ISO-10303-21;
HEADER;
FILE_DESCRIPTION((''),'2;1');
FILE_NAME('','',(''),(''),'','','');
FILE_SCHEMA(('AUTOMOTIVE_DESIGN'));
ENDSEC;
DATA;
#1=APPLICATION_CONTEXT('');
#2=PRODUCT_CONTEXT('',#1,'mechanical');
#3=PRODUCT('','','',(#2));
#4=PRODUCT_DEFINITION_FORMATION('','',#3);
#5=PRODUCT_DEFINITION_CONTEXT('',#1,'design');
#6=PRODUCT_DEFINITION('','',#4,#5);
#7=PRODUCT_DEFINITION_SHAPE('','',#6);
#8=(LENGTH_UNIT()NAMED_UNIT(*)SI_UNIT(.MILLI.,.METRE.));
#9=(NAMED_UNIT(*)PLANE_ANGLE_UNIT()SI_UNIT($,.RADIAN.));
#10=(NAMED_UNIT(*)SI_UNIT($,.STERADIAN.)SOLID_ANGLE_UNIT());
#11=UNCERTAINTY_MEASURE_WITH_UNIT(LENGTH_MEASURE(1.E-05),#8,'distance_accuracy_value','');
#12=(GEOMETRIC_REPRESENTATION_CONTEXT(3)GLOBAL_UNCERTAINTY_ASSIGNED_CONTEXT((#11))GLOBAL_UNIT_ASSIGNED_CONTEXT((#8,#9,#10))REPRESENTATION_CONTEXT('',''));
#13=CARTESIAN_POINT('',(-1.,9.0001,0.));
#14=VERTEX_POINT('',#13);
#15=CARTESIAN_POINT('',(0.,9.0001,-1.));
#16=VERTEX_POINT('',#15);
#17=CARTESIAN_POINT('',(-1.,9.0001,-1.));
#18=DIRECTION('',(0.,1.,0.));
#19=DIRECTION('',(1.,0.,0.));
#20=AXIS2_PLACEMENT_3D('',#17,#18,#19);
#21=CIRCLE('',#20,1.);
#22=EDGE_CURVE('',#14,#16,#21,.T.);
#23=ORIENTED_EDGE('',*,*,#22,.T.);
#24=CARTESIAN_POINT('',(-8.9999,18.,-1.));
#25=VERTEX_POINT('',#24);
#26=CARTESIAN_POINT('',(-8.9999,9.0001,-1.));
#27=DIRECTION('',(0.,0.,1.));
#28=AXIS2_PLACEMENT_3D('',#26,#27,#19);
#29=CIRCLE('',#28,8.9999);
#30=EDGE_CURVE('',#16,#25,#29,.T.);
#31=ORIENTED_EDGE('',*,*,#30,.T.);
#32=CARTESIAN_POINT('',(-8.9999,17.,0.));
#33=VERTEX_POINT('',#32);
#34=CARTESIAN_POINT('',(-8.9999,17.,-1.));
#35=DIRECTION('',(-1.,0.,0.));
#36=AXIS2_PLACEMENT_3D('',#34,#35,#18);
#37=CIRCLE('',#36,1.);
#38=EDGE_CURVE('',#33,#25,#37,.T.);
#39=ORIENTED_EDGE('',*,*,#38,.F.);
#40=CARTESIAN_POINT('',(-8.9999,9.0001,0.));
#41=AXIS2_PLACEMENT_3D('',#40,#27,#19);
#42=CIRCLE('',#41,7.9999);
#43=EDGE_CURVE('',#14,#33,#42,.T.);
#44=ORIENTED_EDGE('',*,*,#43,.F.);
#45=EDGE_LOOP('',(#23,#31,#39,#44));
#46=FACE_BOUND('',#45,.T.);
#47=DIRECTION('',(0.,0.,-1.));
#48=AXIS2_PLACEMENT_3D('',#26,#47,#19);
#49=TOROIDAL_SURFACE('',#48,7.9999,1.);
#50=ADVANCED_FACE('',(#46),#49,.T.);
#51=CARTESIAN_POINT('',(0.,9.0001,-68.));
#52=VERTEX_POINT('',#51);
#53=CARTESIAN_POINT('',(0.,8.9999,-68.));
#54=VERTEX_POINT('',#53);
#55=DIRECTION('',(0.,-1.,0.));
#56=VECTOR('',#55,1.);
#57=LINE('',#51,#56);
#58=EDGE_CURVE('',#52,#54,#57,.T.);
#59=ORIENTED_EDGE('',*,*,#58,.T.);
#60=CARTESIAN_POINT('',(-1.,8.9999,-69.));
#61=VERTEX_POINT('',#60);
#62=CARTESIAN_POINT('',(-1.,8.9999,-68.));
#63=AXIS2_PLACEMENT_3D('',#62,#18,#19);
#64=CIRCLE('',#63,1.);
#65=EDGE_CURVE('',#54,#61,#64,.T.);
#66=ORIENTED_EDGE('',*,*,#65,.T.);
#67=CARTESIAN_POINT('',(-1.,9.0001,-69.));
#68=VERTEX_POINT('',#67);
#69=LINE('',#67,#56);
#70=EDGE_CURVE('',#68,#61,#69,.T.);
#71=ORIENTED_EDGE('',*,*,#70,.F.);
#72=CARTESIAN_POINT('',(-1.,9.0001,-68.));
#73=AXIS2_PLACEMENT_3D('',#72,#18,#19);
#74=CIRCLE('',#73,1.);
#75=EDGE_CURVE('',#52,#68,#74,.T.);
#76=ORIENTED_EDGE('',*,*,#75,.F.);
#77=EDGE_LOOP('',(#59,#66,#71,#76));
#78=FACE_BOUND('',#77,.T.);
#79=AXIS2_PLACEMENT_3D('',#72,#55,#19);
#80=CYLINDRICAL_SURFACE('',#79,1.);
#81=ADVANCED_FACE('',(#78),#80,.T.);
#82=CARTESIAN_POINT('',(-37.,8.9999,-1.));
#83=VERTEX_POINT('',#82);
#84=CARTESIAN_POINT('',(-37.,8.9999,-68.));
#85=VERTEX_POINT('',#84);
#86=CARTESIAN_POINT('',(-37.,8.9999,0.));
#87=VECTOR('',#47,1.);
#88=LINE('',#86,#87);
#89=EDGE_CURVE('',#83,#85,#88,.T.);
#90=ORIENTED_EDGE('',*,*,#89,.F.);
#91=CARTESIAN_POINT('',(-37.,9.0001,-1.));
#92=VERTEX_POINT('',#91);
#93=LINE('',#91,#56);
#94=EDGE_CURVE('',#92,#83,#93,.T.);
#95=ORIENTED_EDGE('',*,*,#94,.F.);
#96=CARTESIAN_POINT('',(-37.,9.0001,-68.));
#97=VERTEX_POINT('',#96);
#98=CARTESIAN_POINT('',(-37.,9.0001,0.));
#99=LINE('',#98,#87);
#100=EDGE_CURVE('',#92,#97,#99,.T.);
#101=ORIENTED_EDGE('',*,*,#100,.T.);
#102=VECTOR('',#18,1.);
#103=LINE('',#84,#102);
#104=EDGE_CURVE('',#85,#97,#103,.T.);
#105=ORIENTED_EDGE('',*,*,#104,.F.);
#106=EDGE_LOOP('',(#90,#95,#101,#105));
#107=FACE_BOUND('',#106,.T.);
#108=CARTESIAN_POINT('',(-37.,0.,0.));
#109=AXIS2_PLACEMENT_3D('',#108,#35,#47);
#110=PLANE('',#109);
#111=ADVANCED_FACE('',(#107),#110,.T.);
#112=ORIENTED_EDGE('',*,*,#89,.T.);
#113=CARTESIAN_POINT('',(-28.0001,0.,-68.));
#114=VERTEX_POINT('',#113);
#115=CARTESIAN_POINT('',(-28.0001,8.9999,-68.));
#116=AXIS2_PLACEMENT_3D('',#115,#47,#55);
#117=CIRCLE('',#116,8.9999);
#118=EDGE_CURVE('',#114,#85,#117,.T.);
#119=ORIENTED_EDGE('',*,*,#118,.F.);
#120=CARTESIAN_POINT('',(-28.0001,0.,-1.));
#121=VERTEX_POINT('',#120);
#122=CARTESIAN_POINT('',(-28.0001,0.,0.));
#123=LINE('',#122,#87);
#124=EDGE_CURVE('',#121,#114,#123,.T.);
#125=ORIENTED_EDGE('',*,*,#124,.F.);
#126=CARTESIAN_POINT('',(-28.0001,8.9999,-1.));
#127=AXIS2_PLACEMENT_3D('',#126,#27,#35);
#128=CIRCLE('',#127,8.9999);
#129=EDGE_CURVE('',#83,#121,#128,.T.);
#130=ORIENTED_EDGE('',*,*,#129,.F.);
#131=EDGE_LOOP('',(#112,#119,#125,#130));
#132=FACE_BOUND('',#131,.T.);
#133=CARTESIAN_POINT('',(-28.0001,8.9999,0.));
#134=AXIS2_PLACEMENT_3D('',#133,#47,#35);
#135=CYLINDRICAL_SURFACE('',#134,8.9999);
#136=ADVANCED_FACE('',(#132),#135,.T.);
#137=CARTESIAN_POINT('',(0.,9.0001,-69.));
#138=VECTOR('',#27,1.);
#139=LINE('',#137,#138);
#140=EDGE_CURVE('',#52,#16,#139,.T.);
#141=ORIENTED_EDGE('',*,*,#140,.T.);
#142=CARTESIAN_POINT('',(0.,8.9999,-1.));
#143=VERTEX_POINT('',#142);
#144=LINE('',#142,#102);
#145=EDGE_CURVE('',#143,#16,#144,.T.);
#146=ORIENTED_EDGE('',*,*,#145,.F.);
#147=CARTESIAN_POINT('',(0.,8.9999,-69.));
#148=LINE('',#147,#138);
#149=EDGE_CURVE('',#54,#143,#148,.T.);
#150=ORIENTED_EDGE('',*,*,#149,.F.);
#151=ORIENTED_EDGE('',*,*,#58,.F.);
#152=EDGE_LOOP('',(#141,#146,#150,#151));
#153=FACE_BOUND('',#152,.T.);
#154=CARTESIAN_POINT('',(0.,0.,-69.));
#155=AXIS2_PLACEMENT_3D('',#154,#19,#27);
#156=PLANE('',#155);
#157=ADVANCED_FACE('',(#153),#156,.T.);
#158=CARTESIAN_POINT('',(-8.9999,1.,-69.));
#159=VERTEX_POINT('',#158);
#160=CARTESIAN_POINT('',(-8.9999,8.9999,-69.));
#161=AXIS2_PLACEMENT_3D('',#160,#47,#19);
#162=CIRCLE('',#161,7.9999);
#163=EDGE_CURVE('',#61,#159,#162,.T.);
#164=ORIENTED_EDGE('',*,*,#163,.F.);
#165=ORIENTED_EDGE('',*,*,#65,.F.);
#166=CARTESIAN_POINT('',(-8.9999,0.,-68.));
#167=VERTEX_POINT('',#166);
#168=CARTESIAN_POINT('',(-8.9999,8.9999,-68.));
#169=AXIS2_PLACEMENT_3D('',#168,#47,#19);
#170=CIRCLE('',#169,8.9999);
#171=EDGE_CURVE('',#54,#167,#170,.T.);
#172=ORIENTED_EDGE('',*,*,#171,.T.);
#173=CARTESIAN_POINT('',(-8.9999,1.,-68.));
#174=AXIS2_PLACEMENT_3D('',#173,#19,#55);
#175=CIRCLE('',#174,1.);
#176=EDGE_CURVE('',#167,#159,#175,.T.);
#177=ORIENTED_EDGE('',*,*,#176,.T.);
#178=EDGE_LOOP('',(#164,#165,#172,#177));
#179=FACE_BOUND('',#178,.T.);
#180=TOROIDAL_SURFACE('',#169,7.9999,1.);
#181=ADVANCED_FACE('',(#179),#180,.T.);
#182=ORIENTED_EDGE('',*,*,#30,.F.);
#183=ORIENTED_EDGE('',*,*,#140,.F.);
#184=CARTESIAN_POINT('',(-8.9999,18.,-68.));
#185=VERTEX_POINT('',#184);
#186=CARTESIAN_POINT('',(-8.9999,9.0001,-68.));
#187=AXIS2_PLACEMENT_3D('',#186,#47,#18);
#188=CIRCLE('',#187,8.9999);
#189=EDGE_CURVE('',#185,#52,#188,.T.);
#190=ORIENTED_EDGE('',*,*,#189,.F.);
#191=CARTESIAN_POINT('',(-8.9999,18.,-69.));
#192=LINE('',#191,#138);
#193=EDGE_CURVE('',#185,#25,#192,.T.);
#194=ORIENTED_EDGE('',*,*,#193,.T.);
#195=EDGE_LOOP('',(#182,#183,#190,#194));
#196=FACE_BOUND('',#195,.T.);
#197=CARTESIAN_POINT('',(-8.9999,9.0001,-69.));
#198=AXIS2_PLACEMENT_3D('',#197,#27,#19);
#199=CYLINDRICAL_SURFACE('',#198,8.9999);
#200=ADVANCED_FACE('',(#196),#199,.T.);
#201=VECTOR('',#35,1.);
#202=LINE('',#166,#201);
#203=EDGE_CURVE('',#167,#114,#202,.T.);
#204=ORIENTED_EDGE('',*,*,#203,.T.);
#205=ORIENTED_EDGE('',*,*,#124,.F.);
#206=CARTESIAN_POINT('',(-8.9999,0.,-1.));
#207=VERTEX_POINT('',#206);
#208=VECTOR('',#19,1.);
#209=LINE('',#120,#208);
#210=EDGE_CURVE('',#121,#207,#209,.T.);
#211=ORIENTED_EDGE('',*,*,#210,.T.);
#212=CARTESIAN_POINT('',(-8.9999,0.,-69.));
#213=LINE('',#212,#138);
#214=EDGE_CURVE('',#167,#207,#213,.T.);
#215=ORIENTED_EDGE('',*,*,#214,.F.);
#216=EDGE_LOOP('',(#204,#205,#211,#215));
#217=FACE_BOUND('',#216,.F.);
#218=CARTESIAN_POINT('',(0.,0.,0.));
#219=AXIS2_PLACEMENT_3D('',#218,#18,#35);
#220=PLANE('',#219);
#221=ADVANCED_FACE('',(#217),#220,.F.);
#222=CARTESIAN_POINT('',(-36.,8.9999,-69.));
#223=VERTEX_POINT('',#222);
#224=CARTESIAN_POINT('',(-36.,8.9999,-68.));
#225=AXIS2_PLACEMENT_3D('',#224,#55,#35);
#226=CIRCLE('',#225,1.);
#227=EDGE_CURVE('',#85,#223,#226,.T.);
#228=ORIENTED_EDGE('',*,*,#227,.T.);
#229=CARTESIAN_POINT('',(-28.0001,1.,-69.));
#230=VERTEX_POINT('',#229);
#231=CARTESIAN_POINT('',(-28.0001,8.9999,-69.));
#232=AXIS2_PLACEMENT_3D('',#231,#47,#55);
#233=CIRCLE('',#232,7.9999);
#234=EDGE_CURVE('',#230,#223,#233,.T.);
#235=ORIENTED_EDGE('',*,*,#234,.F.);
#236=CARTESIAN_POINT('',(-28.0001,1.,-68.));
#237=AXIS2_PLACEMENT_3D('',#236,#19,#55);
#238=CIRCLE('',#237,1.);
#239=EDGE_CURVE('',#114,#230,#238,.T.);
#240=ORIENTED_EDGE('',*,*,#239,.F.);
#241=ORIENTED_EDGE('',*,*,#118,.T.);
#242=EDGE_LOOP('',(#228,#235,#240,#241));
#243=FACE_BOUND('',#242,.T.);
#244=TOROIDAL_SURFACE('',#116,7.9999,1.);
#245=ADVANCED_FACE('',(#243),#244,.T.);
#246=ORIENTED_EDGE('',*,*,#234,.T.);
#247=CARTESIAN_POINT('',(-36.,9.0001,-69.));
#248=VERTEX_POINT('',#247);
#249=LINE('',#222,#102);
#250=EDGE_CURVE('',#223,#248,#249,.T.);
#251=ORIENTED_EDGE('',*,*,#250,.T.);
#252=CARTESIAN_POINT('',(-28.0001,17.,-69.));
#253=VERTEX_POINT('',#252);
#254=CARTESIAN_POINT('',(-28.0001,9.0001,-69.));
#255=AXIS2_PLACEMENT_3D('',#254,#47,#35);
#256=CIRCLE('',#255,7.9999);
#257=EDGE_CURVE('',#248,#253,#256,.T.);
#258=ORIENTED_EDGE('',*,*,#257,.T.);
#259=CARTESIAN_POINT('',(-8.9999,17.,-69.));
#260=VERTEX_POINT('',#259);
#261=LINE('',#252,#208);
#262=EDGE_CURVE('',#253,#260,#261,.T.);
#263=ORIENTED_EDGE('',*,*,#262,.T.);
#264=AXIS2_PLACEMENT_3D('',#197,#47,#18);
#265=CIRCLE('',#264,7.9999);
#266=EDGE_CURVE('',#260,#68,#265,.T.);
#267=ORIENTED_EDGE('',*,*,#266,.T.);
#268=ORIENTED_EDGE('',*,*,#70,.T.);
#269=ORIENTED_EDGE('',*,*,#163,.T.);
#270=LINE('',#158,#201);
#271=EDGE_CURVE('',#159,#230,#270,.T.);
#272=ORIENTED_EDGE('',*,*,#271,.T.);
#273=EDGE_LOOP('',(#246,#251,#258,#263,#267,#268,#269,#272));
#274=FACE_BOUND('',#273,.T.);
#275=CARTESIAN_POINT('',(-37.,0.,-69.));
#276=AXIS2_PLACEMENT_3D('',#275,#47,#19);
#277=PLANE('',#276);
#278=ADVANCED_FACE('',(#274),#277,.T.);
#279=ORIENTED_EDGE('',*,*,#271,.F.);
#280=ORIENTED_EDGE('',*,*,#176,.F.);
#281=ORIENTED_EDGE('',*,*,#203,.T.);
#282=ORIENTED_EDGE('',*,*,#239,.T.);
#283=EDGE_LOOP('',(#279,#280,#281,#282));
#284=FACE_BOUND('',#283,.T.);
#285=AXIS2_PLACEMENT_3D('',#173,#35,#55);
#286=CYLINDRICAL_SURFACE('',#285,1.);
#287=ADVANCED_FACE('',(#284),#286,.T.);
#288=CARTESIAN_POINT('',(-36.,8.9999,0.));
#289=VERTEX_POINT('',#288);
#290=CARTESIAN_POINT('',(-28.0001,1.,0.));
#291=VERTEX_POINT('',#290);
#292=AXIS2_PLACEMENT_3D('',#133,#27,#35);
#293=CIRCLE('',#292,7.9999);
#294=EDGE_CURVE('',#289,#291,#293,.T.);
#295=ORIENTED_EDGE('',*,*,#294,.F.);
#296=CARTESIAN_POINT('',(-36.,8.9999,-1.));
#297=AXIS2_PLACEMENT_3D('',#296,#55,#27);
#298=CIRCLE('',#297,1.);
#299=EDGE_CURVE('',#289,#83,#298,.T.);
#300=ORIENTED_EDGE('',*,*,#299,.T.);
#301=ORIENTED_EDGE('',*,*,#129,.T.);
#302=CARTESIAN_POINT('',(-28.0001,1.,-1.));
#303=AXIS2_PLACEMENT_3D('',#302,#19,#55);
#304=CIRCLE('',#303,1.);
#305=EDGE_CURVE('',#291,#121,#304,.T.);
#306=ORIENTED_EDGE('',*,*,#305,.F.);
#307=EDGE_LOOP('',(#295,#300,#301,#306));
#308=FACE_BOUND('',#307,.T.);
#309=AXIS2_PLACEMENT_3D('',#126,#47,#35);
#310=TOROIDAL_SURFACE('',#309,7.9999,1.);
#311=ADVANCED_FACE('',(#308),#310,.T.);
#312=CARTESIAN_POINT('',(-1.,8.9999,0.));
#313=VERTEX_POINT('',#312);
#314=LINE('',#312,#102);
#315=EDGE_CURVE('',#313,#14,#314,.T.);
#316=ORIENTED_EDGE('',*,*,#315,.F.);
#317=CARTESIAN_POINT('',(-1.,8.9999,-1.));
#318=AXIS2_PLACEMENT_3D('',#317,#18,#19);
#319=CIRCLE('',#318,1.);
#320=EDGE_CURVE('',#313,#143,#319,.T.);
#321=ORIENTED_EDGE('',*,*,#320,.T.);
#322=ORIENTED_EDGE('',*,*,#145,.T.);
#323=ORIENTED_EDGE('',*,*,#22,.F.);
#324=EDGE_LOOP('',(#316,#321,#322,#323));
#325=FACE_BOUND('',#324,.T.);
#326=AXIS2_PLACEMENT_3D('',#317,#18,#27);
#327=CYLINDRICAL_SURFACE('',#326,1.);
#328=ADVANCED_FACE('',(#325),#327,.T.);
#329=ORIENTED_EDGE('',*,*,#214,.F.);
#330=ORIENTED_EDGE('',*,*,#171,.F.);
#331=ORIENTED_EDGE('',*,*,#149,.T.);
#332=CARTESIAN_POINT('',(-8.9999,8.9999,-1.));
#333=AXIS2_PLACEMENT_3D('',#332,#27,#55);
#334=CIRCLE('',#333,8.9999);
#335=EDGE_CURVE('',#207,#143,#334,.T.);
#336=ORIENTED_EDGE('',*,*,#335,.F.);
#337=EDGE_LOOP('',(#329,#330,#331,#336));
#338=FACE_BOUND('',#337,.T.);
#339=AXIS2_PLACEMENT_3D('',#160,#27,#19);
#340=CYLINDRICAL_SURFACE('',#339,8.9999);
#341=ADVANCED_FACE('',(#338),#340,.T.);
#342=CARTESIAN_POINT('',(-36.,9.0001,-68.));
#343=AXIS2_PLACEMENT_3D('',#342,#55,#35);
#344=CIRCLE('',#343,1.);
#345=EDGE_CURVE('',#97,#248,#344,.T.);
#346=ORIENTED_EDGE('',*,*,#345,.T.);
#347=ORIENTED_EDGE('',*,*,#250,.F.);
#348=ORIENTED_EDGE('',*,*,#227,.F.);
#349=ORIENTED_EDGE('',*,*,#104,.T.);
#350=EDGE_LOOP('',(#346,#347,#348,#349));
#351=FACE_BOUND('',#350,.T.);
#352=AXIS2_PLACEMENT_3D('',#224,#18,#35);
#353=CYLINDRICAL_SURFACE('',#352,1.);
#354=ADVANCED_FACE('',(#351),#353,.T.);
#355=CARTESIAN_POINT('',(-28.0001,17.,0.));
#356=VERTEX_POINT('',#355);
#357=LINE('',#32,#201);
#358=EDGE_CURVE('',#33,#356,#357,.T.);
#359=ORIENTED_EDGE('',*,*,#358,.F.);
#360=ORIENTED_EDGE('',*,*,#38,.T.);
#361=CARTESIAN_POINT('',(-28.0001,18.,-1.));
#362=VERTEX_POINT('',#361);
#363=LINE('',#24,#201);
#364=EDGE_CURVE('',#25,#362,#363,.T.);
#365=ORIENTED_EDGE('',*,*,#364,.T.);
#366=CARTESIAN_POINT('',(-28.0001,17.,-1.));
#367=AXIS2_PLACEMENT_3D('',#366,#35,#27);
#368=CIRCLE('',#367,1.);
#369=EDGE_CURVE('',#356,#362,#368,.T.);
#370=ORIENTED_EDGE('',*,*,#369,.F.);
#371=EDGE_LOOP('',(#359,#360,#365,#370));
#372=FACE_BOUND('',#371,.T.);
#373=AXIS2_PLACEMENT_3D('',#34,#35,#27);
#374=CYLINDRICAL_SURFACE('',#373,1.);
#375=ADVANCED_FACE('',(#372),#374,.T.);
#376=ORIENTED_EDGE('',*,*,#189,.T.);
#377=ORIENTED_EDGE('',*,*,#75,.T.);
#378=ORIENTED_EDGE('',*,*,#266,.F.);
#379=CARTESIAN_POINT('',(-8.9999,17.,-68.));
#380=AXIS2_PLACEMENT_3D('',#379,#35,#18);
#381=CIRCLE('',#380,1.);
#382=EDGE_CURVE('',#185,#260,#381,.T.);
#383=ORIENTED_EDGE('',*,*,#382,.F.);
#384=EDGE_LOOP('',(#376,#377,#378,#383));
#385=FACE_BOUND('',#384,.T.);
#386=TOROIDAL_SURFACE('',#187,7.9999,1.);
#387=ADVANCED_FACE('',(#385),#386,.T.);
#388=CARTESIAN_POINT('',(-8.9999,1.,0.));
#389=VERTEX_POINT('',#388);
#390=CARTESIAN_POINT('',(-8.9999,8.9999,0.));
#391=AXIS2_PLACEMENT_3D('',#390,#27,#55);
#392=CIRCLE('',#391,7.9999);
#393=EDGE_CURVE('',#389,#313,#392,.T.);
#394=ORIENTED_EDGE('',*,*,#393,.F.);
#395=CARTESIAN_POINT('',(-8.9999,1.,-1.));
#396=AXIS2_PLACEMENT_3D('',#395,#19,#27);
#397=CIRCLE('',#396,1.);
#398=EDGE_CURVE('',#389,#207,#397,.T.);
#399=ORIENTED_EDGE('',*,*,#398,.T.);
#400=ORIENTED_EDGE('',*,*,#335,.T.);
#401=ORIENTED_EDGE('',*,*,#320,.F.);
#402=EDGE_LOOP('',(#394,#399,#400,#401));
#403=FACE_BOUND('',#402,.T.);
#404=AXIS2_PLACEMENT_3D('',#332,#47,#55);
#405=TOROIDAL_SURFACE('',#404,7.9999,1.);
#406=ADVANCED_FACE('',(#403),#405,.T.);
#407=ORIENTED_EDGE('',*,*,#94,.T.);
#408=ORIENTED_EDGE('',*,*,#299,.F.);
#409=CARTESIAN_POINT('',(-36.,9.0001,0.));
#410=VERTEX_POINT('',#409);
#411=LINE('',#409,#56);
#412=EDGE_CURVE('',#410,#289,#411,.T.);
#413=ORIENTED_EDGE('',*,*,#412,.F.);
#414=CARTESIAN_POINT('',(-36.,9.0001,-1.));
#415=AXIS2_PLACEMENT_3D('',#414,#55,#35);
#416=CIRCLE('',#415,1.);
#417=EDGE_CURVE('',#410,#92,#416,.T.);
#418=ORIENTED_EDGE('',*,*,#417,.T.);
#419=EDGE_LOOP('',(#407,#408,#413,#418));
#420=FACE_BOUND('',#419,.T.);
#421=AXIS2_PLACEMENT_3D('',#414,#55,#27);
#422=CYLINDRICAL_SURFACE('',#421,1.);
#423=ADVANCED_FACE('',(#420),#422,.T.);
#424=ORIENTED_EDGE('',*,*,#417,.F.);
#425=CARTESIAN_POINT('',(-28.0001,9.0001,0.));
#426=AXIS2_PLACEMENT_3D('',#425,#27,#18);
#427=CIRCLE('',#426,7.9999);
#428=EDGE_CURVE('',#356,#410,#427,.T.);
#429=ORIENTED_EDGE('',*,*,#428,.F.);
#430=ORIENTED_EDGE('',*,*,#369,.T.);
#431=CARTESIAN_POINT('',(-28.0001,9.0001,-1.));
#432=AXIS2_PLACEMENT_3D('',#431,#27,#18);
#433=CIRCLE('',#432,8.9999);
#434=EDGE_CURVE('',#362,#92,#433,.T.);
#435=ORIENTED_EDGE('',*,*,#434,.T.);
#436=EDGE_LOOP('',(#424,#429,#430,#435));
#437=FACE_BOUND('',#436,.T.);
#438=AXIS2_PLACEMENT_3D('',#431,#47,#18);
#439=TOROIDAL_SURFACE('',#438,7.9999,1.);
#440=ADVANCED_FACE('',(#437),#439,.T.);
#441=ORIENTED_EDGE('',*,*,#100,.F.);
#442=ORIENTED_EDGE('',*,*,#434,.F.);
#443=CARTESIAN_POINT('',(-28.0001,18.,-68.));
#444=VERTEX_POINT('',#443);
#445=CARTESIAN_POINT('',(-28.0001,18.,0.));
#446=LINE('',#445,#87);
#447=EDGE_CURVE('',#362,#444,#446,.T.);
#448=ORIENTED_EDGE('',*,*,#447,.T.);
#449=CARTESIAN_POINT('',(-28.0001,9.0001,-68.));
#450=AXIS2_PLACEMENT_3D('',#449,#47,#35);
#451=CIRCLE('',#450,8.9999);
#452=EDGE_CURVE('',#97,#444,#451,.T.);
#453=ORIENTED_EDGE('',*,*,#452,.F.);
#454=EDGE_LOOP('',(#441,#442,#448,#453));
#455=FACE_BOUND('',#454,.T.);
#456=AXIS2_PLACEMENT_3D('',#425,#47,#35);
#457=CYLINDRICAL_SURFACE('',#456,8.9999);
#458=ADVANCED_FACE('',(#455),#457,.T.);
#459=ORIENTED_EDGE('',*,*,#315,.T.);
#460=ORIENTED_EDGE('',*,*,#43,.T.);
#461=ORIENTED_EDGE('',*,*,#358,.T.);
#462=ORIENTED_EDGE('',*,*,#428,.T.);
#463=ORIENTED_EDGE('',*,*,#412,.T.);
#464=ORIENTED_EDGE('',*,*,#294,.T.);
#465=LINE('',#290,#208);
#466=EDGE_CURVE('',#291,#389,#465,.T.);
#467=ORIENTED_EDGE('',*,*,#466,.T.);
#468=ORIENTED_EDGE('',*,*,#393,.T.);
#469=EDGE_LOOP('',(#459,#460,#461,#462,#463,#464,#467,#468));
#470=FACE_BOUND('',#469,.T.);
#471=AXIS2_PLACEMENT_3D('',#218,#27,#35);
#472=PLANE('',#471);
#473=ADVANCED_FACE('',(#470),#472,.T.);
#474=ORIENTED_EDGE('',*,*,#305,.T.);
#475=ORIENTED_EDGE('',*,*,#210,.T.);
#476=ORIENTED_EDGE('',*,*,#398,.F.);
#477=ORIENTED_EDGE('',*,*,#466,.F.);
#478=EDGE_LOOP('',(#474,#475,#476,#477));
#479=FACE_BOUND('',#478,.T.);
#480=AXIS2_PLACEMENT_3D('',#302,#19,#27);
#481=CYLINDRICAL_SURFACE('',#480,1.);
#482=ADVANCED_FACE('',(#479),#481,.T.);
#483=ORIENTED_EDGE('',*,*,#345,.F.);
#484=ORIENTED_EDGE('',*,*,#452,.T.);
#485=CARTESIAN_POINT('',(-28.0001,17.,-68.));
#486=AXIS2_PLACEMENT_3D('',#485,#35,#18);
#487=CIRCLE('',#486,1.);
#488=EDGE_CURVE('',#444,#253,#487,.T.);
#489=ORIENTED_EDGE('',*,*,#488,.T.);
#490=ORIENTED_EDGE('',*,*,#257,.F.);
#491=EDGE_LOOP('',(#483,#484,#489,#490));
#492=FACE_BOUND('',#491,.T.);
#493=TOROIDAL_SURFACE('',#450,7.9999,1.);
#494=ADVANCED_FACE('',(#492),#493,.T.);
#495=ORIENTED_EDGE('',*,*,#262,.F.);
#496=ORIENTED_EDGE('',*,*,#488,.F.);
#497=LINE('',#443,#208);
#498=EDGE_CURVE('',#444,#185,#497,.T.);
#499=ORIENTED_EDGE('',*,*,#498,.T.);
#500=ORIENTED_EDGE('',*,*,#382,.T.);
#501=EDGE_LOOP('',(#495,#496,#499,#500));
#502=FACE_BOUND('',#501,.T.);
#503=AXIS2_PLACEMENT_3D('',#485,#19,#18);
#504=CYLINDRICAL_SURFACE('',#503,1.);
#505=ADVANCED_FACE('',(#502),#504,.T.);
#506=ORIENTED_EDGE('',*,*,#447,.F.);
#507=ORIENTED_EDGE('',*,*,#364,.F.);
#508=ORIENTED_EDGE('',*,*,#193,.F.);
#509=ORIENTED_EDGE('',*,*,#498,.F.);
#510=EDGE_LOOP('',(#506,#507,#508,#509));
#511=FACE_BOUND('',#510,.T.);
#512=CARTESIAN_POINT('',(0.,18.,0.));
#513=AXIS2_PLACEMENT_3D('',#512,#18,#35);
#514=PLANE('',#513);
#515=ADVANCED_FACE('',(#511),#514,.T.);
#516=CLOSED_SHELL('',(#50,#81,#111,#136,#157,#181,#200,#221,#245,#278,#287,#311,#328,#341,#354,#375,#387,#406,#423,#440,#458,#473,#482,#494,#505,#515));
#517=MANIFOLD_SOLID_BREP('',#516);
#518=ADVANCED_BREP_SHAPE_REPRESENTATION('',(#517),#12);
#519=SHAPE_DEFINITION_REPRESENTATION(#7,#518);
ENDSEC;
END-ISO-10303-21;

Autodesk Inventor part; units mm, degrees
ref_plane "YZ Plane" through (0, 0, 0) normal (1, 0, 0) x (0, 1, 0)
ref_plane "XZ Plane" through (0, 0, 0) normal (0, 1, 0) x (-1, 0, 0)
ref_plane "XY Plane" through (0, 0, 0) normal (0, 0, 1) x (1, 0, 0)
sketch "Sketch1" plane through (0, 0, 0) normal (0, 1, 0) x (-1, 0, 0)
  line L0 (0, 0) -> (37, 0)
  line L1 (37, 0) -> (37, -69)
  line L2 (37, -69) -> (0, -69)
  line L3 (0, -69) -> (0, 0)
  dimension "d0" = 37
  dimension "d1" = 69
extrude "Extrusion1" add sketch "Sketch1" along normal blind 18
fillet "Fillet1" radius 9 4 edges at (0, 18, -34.5) (0, 0, -34.5) (-37, 18, -34.5) (-37, 0, -34.5)
fillet "Fillet2" radius 1 8 edges at (-2.636, 15.364, 0) (-18.5, 0, 0) (-34.364, 15.364, 0) (-18.5, 18, 0) (-34.364, 15.364, -69) (-18.5, 0, -69) (-2.636, 15.364, -69) (-18.5, 18, -69)
properties part number "4400mAh-LiIon-Battery"
